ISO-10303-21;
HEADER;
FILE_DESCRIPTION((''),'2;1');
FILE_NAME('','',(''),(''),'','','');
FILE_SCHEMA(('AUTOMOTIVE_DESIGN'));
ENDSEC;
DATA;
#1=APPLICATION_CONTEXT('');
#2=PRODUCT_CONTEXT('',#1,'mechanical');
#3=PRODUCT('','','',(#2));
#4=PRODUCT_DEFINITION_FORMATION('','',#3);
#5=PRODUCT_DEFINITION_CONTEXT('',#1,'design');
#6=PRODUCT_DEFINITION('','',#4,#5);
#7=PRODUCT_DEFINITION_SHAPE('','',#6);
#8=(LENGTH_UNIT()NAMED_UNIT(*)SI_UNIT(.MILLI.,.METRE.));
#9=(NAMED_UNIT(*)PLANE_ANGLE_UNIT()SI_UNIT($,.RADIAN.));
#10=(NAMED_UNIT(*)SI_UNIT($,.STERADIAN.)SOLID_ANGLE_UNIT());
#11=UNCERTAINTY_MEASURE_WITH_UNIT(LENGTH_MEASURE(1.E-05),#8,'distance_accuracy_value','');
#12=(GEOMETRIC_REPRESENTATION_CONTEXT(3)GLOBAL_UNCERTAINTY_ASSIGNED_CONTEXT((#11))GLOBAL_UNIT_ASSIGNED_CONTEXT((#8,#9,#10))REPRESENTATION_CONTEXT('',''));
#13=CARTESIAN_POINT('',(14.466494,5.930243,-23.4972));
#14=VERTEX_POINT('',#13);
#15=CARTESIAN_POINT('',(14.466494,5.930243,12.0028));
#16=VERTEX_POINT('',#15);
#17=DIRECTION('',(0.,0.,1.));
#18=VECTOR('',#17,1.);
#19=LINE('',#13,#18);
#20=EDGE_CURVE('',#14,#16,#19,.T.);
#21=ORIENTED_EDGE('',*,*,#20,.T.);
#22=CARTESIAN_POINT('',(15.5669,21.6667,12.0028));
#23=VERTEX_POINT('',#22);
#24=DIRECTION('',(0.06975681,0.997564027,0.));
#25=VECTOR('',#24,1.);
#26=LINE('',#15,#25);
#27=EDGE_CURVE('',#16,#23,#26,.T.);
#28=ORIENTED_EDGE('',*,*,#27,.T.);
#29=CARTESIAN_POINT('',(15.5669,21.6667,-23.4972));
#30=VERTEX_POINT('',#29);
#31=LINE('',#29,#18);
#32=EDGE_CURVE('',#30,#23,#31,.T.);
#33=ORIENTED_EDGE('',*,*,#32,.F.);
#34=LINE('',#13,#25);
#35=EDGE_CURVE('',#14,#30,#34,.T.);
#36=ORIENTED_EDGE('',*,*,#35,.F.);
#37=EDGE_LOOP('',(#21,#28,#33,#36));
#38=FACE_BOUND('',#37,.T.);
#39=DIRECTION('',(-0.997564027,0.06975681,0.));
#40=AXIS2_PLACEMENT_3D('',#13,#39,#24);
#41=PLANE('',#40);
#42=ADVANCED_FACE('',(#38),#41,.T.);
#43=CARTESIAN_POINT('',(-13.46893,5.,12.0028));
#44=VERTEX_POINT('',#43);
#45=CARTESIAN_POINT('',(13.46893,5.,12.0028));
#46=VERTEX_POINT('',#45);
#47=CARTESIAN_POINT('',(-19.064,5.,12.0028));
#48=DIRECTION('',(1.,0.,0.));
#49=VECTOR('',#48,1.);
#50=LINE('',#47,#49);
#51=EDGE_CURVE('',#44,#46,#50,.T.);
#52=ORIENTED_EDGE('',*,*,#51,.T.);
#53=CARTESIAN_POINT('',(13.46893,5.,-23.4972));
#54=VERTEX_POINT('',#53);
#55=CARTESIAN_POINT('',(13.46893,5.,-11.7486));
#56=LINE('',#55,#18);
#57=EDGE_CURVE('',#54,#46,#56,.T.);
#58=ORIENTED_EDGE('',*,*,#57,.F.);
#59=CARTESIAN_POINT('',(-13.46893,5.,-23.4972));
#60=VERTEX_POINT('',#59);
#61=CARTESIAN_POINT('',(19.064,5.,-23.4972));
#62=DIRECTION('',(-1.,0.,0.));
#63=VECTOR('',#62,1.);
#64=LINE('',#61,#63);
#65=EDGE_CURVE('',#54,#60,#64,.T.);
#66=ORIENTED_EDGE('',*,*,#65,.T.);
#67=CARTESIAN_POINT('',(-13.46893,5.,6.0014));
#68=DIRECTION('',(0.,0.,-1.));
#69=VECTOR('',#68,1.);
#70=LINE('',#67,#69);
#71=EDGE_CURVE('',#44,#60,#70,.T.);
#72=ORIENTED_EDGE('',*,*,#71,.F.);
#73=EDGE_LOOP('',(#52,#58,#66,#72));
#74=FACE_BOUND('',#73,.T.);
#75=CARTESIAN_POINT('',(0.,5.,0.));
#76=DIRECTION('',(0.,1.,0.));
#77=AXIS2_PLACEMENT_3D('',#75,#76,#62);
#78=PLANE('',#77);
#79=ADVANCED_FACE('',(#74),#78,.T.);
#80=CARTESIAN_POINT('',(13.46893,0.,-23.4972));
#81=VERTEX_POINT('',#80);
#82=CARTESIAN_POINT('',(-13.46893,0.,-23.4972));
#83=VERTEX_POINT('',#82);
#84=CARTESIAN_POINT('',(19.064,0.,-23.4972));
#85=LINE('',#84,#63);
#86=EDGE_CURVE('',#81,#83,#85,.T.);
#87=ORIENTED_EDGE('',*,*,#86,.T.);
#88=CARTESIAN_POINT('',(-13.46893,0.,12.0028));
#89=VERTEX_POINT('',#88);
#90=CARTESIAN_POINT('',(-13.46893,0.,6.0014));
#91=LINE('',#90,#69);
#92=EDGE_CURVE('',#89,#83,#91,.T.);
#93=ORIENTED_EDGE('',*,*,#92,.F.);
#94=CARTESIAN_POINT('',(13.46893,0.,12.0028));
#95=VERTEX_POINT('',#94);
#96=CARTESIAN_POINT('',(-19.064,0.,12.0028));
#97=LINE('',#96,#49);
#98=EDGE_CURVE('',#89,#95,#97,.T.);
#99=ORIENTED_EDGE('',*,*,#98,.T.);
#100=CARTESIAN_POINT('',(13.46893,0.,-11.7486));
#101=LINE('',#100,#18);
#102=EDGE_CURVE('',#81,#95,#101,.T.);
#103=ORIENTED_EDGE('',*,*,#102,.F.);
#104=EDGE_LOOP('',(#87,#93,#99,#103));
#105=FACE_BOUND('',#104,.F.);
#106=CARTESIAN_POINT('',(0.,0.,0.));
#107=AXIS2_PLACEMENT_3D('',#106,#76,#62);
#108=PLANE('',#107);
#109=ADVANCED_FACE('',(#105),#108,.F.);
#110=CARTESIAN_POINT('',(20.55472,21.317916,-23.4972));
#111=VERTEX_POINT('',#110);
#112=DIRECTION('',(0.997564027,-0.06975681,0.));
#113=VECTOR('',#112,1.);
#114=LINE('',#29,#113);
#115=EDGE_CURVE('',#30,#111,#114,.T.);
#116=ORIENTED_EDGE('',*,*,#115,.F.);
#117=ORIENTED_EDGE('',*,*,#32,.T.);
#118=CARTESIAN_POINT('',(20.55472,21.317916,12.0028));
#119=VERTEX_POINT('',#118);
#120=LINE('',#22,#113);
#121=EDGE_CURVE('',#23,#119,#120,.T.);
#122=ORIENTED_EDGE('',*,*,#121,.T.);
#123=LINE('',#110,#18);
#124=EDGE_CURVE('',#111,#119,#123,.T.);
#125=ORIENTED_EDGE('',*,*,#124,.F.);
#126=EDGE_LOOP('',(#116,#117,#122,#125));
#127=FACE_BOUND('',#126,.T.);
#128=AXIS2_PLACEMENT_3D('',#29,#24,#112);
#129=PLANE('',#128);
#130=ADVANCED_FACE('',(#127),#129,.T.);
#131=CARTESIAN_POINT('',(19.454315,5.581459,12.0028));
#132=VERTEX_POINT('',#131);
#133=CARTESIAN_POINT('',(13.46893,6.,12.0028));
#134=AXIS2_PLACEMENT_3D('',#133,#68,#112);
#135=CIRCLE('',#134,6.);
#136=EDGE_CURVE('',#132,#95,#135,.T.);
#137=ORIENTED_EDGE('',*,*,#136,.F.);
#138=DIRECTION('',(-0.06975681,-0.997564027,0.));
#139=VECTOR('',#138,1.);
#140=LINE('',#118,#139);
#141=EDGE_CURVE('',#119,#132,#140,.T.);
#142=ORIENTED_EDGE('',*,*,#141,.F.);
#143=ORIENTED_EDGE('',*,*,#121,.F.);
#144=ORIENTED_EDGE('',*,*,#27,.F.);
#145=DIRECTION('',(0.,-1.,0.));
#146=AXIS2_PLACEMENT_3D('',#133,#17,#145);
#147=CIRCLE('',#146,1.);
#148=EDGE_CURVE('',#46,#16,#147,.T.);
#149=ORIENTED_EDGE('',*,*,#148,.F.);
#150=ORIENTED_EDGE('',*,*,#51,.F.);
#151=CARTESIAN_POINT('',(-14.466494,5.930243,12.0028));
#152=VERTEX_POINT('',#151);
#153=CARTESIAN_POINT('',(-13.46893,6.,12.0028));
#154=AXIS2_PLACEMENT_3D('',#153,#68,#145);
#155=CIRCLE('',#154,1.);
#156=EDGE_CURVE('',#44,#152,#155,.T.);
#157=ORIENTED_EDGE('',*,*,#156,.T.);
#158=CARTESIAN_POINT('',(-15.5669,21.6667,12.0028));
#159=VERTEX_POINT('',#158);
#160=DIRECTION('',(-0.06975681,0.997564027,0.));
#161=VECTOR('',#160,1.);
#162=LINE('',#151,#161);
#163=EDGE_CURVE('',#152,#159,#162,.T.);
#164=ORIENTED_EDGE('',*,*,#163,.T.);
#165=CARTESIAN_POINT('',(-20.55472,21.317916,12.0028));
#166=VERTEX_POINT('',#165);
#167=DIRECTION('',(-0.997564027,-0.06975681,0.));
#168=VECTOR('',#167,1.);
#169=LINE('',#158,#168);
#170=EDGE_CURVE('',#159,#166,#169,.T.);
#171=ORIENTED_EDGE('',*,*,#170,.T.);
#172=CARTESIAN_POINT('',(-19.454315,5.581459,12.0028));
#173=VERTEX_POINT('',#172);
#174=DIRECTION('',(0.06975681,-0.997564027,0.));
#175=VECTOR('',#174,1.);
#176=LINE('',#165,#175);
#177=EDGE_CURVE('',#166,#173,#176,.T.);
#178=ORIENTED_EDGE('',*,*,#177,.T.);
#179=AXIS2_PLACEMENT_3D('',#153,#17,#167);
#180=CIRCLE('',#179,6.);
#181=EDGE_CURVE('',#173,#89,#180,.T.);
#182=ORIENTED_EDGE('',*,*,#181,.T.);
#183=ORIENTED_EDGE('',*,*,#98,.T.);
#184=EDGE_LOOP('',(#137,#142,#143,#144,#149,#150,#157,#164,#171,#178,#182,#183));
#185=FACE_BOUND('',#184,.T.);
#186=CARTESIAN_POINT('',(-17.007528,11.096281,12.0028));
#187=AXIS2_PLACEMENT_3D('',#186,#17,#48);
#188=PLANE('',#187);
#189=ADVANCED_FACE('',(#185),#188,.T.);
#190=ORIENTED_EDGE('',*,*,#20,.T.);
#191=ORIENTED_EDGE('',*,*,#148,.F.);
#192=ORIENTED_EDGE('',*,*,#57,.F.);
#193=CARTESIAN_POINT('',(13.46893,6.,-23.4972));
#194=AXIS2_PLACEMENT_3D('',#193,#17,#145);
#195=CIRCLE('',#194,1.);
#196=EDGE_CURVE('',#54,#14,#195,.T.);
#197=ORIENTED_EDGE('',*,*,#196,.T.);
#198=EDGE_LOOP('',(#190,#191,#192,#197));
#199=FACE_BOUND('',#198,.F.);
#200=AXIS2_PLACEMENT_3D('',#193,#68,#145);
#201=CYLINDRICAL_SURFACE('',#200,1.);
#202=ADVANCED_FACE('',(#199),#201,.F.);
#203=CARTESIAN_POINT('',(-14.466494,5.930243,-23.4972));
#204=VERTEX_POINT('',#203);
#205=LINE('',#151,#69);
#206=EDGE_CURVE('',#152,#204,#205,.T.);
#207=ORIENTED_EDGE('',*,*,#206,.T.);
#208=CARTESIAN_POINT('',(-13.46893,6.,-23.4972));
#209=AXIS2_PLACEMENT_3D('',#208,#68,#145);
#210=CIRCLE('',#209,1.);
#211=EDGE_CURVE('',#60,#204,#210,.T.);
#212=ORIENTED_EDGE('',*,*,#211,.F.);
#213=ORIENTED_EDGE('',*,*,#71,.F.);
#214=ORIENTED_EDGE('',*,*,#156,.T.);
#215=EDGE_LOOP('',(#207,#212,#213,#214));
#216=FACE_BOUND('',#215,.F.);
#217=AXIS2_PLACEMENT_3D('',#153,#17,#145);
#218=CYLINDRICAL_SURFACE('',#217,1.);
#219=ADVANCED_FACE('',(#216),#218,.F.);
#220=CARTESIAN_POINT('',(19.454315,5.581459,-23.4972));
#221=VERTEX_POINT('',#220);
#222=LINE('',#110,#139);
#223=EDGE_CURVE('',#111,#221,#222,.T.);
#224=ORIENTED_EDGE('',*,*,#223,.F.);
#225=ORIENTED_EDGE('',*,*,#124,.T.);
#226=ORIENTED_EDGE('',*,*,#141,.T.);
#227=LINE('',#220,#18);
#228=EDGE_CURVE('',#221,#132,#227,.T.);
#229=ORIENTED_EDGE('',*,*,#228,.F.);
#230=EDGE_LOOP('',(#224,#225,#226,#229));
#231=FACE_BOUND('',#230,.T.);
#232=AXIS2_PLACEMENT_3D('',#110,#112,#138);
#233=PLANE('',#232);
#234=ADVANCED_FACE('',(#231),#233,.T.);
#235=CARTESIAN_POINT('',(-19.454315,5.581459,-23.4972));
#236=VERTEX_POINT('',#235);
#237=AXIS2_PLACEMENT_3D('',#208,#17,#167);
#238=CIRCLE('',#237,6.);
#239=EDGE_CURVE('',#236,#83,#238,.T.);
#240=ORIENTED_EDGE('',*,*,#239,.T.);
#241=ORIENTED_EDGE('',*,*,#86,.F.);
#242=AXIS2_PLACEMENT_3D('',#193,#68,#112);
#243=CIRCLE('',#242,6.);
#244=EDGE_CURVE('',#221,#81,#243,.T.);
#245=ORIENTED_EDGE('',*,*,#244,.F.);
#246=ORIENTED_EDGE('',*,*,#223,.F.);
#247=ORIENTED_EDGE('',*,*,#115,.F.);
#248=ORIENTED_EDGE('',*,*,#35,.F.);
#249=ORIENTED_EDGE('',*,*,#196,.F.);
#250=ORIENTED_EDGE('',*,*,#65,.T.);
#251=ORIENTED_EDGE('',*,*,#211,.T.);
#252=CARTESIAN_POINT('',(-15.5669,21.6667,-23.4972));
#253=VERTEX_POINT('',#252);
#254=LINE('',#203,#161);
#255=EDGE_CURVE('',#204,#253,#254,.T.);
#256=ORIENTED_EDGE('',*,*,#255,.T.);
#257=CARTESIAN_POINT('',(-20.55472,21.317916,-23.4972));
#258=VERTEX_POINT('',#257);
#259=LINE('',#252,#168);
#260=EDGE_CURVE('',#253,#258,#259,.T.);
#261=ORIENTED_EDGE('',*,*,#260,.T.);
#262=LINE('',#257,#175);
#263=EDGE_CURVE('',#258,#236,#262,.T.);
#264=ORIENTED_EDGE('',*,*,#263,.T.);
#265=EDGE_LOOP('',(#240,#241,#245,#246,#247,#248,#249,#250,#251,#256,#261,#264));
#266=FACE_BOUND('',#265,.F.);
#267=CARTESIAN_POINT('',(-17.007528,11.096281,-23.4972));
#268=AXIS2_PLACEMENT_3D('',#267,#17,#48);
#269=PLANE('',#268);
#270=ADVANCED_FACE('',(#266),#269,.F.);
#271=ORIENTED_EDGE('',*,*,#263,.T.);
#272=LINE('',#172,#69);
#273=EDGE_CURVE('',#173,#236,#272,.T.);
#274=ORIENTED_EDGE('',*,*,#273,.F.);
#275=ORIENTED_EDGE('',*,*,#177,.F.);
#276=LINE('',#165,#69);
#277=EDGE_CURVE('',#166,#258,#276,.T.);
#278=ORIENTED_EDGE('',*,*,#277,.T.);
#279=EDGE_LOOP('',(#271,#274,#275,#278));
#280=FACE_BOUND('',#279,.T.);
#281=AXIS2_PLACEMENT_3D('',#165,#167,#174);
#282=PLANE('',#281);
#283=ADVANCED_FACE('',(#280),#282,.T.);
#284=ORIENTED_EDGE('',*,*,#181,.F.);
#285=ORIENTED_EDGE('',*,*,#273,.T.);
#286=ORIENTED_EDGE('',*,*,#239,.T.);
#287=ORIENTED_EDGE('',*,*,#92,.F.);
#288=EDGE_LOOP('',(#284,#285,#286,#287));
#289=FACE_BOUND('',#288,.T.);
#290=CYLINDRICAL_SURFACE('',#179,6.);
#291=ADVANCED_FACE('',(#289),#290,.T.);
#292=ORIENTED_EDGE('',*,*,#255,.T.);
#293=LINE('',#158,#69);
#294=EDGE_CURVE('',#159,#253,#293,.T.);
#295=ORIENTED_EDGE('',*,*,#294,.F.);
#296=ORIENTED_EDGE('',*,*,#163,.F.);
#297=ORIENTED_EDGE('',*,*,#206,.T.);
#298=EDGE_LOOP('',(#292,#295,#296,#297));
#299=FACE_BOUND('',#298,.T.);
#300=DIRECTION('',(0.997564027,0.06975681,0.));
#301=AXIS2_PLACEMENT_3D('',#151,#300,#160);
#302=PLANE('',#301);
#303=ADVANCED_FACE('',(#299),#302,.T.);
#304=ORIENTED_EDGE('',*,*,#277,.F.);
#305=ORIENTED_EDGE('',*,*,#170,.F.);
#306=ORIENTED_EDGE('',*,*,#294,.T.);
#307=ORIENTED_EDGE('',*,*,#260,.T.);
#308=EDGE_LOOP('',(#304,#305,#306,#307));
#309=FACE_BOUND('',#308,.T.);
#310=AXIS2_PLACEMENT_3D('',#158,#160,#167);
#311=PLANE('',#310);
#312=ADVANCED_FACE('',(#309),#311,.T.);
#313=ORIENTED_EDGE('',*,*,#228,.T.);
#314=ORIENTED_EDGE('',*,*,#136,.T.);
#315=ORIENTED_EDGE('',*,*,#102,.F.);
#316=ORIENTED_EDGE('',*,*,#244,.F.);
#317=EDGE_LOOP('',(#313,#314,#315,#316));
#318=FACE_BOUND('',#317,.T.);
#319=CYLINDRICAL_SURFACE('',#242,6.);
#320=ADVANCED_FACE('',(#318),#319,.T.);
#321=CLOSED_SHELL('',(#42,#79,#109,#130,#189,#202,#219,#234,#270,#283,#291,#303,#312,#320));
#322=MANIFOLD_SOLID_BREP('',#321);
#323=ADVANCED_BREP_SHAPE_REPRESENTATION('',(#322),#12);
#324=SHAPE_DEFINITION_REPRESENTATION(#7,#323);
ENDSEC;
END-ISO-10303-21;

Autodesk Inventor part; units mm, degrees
ref_plane "YZ Plane" through (0, 0, 0) normal (1, 0, 0) x (0, 1, 0)
ref_plane "XZ Plane" through (0, 0, 0) normal (0, 1, 0) x (-1, 0, 0)
ref_plane "XY Plane" through (0, 0, 0) normal (0, 0, 1) x (1, 0, 0)
sketch "Sketch1" plane through (0, 0, 0) normal (0, 1, 0) x (-1, 0, 0)
  line L0 (0, 0) -> (0, -27.002) construction
  line L1 (19.064, 12.0028) -> (-19.064, 12.0028)
  line L2 (-19.064, 12.0028) -> (-19.064, -23.4972)
  line L3 (-19.064, -23.4972) -> (19.064, -23.4972)
  line L4 (19.064, -23.4972) -> (19.064, 12.0028)
  dimension "d0" = 35.5
  dimension "d12" = 38.128
extrude "Plate1" add sketch "Sketch1" along normal blind 5
sketch "Sketch2" plane through (-14.0762, 0.3488, 12.0028) normal (-0.9975641, -0.0697565, 0) x (0.0697565, -0.9975641, 0)
  line L0 (0, -35.5) -> (0, 0)
  line L1 (0, 0) -> (-21.37, 0)
  line L2 (-21.37, 0) -> (-21.37, -35.5)
  line L3 (-21.37, -35.5) -> (0, -35.5)
edge flange "Flange1" height 21.37 angle 86 thickness 5 bend radius 1 thickness toward (-0.9975641, -0.0697565, 0) relief tear relief width 5 relief depth 2.5 corner gap 1 corner form 0 edges at (-19.064, 5, -5.7472) (19.064, 5, -5.7472) wall of the first edge with corners at (-14.0762, 0.3488, -23.4972) (-14.0762, 0.3488, 12.0028) (-15.5669, 21.6667, 12.0028) (-15.5669, 21.6667, -23.4972)
bend "Bend1"
corner "Corner1"
equation "\"d1\" = Thickness"
equation "\"d2\" = BendReliefWidth"
equation "\"d3\" = BendReliefDepth"
equation "\"d4\" = MinimumRemnant"
equation "\"d5\" = TransitionRadius"
equation "\"d8\" = BendRadius"
equation "\"d9\" = CornerReliefSize"
equation "\"d10\" = GapSize"
equation "\"d11\" = JacobiRadiusSize"
equation "\"BendReliefWidth\" = Thickness"
equation "\"BendReliefDepth\" = 0.5 * Thickness"
equation "\"TransitionRadius\" = BendRadius"
equation "\"JacobiRadiusSize\" = BendRadius"
equation "\"GapSize\" = Thickness"
equation "\"Thickness\" = 5"
equation "\"MinimumRemnant\" = 10"
equation "\"BendRadius\" = 1"
equation "\"CornerReliefSize\" = 20"
properties part number "øre" material "Steel"
